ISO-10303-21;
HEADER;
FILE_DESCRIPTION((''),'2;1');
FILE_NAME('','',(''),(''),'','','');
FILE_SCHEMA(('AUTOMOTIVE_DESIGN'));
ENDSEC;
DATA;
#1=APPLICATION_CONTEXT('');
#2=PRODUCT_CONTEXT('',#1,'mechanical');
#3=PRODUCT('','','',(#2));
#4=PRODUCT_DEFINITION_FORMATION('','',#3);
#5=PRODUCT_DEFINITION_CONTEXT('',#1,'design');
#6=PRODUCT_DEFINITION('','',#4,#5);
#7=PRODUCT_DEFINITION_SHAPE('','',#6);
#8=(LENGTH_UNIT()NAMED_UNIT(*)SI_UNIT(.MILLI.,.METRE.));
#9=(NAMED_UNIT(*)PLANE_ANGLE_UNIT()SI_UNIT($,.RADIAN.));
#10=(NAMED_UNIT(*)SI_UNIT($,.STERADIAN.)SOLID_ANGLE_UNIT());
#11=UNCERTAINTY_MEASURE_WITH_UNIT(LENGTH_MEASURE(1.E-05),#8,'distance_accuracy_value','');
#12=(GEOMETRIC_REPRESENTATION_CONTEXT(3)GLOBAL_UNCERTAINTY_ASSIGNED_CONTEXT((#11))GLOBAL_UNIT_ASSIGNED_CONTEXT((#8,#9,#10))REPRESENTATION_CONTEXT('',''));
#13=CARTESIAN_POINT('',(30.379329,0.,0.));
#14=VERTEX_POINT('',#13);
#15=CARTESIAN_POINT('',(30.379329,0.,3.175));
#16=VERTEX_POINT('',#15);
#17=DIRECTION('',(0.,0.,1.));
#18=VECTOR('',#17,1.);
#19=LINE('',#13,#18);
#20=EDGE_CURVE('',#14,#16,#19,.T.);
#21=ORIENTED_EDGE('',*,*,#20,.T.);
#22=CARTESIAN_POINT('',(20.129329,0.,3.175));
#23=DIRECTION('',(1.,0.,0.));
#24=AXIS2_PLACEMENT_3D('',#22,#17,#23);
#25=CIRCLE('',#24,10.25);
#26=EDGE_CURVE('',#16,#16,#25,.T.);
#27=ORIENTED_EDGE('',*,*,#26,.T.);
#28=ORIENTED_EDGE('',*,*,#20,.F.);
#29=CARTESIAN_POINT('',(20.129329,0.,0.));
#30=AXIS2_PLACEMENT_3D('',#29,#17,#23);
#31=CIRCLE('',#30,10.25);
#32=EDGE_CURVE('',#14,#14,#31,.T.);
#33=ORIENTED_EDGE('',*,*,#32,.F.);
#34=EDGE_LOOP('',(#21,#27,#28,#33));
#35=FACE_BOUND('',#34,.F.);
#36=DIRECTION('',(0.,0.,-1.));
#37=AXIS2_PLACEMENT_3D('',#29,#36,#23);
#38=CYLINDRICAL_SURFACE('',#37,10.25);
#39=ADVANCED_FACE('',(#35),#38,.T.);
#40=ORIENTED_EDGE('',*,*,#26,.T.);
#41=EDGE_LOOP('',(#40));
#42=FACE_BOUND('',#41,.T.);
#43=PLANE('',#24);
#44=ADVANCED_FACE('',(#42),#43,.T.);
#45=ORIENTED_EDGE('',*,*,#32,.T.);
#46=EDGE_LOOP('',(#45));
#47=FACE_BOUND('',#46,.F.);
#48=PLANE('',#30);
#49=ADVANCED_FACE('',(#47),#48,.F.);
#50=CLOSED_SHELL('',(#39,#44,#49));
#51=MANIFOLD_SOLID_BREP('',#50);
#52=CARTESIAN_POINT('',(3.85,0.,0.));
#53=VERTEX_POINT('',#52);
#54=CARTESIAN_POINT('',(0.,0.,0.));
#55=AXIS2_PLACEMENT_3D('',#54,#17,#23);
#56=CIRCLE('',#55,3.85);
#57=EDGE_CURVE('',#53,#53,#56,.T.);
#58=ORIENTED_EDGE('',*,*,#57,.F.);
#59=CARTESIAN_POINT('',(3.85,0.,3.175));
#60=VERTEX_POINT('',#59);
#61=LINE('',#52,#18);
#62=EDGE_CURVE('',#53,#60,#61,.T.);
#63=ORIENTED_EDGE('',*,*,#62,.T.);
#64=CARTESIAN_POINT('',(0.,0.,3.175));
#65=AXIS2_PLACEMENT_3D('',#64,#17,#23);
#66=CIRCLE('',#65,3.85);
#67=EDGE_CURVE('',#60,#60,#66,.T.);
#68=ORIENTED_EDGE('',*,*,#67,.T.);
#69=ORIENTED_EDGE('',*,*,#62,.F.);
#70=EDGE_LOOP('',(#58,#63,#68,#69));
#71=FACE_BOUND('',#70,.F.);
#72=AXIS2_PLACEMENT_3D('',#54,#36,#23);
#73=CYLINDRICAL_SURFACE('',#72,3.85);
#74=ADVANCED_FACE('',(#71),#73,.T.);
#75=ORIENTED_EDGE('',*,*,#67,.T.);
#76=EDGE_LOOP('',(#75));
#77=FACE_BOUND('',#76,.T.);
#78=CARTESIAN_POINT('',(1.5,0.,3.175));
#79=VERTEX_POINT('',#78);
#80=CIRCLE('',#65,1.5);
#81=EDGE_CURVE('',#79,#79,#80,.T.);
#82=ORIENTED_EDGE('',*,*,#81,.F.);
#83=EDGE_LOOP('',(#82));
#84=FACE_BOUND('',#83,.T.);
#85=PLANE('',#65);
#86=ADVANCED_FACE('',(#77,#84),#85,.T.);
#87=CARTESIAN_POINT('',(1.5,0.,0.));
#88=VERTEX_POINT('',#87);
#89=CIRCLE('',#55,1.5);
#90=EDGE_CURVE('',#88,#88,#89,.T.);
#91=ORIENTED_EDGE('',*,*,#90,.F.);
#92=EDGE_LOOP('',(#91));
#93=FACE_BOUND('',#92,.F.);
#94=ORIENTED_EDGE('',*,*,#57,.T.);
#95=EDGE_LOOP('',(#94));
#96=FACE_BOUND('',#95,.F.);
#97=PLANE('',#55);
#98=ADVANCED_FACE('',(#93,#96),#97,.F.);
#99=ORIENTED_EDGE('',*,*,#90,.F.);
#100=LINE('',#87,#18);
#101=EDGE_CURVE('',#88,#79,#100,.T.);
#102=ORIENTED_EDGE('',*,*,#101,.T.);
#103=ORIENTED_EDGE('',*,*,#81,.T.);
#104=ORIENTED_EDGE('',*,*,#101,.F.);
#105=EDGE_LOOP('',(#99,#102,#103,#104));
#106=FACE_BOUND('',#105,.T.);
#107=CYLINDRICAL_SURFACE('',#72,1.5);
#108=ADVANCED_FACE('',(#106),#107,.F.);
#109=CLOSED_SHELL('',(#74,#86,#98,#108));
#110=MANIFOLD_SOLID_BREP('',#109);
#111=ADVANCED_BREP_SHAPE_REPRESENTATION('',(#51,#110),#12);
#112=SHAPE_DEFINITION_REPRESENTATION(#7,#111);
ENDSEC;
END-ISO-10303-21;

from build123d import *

# Parameters (mm, degrees)
F0_R     = 3.85
F0_R_2   = 1.5
F1_DEPTH = 3.175
F0_R_3   = 10.25


# Not quite as in the source:
# - a length typed as a fraction of an inch, garbled in the dataset ("3 / 203.2 mm" for 3/8 in), is restored


with BuildPart() as f1:
    # F0 (on Top) → F1 (new body)
    with BuildSketch(Plane.XY):
        Circle(F0_R)
        Circle(F0_R_2, mode=Mode.SUBTRACT)
    extrude(amount=F1_DEPTH)


with BuildPart() as f1b:
    # F0 (on Top) → F1, piece 2 (new body)
    with BuildSketch(Plane.XY):
        with Locations((20.1293285936, 0)):
            Circle(F0_R_3)
    extrude(amount=F1_DEPTH)


solid = Compound([f1.part, f1b.part])
